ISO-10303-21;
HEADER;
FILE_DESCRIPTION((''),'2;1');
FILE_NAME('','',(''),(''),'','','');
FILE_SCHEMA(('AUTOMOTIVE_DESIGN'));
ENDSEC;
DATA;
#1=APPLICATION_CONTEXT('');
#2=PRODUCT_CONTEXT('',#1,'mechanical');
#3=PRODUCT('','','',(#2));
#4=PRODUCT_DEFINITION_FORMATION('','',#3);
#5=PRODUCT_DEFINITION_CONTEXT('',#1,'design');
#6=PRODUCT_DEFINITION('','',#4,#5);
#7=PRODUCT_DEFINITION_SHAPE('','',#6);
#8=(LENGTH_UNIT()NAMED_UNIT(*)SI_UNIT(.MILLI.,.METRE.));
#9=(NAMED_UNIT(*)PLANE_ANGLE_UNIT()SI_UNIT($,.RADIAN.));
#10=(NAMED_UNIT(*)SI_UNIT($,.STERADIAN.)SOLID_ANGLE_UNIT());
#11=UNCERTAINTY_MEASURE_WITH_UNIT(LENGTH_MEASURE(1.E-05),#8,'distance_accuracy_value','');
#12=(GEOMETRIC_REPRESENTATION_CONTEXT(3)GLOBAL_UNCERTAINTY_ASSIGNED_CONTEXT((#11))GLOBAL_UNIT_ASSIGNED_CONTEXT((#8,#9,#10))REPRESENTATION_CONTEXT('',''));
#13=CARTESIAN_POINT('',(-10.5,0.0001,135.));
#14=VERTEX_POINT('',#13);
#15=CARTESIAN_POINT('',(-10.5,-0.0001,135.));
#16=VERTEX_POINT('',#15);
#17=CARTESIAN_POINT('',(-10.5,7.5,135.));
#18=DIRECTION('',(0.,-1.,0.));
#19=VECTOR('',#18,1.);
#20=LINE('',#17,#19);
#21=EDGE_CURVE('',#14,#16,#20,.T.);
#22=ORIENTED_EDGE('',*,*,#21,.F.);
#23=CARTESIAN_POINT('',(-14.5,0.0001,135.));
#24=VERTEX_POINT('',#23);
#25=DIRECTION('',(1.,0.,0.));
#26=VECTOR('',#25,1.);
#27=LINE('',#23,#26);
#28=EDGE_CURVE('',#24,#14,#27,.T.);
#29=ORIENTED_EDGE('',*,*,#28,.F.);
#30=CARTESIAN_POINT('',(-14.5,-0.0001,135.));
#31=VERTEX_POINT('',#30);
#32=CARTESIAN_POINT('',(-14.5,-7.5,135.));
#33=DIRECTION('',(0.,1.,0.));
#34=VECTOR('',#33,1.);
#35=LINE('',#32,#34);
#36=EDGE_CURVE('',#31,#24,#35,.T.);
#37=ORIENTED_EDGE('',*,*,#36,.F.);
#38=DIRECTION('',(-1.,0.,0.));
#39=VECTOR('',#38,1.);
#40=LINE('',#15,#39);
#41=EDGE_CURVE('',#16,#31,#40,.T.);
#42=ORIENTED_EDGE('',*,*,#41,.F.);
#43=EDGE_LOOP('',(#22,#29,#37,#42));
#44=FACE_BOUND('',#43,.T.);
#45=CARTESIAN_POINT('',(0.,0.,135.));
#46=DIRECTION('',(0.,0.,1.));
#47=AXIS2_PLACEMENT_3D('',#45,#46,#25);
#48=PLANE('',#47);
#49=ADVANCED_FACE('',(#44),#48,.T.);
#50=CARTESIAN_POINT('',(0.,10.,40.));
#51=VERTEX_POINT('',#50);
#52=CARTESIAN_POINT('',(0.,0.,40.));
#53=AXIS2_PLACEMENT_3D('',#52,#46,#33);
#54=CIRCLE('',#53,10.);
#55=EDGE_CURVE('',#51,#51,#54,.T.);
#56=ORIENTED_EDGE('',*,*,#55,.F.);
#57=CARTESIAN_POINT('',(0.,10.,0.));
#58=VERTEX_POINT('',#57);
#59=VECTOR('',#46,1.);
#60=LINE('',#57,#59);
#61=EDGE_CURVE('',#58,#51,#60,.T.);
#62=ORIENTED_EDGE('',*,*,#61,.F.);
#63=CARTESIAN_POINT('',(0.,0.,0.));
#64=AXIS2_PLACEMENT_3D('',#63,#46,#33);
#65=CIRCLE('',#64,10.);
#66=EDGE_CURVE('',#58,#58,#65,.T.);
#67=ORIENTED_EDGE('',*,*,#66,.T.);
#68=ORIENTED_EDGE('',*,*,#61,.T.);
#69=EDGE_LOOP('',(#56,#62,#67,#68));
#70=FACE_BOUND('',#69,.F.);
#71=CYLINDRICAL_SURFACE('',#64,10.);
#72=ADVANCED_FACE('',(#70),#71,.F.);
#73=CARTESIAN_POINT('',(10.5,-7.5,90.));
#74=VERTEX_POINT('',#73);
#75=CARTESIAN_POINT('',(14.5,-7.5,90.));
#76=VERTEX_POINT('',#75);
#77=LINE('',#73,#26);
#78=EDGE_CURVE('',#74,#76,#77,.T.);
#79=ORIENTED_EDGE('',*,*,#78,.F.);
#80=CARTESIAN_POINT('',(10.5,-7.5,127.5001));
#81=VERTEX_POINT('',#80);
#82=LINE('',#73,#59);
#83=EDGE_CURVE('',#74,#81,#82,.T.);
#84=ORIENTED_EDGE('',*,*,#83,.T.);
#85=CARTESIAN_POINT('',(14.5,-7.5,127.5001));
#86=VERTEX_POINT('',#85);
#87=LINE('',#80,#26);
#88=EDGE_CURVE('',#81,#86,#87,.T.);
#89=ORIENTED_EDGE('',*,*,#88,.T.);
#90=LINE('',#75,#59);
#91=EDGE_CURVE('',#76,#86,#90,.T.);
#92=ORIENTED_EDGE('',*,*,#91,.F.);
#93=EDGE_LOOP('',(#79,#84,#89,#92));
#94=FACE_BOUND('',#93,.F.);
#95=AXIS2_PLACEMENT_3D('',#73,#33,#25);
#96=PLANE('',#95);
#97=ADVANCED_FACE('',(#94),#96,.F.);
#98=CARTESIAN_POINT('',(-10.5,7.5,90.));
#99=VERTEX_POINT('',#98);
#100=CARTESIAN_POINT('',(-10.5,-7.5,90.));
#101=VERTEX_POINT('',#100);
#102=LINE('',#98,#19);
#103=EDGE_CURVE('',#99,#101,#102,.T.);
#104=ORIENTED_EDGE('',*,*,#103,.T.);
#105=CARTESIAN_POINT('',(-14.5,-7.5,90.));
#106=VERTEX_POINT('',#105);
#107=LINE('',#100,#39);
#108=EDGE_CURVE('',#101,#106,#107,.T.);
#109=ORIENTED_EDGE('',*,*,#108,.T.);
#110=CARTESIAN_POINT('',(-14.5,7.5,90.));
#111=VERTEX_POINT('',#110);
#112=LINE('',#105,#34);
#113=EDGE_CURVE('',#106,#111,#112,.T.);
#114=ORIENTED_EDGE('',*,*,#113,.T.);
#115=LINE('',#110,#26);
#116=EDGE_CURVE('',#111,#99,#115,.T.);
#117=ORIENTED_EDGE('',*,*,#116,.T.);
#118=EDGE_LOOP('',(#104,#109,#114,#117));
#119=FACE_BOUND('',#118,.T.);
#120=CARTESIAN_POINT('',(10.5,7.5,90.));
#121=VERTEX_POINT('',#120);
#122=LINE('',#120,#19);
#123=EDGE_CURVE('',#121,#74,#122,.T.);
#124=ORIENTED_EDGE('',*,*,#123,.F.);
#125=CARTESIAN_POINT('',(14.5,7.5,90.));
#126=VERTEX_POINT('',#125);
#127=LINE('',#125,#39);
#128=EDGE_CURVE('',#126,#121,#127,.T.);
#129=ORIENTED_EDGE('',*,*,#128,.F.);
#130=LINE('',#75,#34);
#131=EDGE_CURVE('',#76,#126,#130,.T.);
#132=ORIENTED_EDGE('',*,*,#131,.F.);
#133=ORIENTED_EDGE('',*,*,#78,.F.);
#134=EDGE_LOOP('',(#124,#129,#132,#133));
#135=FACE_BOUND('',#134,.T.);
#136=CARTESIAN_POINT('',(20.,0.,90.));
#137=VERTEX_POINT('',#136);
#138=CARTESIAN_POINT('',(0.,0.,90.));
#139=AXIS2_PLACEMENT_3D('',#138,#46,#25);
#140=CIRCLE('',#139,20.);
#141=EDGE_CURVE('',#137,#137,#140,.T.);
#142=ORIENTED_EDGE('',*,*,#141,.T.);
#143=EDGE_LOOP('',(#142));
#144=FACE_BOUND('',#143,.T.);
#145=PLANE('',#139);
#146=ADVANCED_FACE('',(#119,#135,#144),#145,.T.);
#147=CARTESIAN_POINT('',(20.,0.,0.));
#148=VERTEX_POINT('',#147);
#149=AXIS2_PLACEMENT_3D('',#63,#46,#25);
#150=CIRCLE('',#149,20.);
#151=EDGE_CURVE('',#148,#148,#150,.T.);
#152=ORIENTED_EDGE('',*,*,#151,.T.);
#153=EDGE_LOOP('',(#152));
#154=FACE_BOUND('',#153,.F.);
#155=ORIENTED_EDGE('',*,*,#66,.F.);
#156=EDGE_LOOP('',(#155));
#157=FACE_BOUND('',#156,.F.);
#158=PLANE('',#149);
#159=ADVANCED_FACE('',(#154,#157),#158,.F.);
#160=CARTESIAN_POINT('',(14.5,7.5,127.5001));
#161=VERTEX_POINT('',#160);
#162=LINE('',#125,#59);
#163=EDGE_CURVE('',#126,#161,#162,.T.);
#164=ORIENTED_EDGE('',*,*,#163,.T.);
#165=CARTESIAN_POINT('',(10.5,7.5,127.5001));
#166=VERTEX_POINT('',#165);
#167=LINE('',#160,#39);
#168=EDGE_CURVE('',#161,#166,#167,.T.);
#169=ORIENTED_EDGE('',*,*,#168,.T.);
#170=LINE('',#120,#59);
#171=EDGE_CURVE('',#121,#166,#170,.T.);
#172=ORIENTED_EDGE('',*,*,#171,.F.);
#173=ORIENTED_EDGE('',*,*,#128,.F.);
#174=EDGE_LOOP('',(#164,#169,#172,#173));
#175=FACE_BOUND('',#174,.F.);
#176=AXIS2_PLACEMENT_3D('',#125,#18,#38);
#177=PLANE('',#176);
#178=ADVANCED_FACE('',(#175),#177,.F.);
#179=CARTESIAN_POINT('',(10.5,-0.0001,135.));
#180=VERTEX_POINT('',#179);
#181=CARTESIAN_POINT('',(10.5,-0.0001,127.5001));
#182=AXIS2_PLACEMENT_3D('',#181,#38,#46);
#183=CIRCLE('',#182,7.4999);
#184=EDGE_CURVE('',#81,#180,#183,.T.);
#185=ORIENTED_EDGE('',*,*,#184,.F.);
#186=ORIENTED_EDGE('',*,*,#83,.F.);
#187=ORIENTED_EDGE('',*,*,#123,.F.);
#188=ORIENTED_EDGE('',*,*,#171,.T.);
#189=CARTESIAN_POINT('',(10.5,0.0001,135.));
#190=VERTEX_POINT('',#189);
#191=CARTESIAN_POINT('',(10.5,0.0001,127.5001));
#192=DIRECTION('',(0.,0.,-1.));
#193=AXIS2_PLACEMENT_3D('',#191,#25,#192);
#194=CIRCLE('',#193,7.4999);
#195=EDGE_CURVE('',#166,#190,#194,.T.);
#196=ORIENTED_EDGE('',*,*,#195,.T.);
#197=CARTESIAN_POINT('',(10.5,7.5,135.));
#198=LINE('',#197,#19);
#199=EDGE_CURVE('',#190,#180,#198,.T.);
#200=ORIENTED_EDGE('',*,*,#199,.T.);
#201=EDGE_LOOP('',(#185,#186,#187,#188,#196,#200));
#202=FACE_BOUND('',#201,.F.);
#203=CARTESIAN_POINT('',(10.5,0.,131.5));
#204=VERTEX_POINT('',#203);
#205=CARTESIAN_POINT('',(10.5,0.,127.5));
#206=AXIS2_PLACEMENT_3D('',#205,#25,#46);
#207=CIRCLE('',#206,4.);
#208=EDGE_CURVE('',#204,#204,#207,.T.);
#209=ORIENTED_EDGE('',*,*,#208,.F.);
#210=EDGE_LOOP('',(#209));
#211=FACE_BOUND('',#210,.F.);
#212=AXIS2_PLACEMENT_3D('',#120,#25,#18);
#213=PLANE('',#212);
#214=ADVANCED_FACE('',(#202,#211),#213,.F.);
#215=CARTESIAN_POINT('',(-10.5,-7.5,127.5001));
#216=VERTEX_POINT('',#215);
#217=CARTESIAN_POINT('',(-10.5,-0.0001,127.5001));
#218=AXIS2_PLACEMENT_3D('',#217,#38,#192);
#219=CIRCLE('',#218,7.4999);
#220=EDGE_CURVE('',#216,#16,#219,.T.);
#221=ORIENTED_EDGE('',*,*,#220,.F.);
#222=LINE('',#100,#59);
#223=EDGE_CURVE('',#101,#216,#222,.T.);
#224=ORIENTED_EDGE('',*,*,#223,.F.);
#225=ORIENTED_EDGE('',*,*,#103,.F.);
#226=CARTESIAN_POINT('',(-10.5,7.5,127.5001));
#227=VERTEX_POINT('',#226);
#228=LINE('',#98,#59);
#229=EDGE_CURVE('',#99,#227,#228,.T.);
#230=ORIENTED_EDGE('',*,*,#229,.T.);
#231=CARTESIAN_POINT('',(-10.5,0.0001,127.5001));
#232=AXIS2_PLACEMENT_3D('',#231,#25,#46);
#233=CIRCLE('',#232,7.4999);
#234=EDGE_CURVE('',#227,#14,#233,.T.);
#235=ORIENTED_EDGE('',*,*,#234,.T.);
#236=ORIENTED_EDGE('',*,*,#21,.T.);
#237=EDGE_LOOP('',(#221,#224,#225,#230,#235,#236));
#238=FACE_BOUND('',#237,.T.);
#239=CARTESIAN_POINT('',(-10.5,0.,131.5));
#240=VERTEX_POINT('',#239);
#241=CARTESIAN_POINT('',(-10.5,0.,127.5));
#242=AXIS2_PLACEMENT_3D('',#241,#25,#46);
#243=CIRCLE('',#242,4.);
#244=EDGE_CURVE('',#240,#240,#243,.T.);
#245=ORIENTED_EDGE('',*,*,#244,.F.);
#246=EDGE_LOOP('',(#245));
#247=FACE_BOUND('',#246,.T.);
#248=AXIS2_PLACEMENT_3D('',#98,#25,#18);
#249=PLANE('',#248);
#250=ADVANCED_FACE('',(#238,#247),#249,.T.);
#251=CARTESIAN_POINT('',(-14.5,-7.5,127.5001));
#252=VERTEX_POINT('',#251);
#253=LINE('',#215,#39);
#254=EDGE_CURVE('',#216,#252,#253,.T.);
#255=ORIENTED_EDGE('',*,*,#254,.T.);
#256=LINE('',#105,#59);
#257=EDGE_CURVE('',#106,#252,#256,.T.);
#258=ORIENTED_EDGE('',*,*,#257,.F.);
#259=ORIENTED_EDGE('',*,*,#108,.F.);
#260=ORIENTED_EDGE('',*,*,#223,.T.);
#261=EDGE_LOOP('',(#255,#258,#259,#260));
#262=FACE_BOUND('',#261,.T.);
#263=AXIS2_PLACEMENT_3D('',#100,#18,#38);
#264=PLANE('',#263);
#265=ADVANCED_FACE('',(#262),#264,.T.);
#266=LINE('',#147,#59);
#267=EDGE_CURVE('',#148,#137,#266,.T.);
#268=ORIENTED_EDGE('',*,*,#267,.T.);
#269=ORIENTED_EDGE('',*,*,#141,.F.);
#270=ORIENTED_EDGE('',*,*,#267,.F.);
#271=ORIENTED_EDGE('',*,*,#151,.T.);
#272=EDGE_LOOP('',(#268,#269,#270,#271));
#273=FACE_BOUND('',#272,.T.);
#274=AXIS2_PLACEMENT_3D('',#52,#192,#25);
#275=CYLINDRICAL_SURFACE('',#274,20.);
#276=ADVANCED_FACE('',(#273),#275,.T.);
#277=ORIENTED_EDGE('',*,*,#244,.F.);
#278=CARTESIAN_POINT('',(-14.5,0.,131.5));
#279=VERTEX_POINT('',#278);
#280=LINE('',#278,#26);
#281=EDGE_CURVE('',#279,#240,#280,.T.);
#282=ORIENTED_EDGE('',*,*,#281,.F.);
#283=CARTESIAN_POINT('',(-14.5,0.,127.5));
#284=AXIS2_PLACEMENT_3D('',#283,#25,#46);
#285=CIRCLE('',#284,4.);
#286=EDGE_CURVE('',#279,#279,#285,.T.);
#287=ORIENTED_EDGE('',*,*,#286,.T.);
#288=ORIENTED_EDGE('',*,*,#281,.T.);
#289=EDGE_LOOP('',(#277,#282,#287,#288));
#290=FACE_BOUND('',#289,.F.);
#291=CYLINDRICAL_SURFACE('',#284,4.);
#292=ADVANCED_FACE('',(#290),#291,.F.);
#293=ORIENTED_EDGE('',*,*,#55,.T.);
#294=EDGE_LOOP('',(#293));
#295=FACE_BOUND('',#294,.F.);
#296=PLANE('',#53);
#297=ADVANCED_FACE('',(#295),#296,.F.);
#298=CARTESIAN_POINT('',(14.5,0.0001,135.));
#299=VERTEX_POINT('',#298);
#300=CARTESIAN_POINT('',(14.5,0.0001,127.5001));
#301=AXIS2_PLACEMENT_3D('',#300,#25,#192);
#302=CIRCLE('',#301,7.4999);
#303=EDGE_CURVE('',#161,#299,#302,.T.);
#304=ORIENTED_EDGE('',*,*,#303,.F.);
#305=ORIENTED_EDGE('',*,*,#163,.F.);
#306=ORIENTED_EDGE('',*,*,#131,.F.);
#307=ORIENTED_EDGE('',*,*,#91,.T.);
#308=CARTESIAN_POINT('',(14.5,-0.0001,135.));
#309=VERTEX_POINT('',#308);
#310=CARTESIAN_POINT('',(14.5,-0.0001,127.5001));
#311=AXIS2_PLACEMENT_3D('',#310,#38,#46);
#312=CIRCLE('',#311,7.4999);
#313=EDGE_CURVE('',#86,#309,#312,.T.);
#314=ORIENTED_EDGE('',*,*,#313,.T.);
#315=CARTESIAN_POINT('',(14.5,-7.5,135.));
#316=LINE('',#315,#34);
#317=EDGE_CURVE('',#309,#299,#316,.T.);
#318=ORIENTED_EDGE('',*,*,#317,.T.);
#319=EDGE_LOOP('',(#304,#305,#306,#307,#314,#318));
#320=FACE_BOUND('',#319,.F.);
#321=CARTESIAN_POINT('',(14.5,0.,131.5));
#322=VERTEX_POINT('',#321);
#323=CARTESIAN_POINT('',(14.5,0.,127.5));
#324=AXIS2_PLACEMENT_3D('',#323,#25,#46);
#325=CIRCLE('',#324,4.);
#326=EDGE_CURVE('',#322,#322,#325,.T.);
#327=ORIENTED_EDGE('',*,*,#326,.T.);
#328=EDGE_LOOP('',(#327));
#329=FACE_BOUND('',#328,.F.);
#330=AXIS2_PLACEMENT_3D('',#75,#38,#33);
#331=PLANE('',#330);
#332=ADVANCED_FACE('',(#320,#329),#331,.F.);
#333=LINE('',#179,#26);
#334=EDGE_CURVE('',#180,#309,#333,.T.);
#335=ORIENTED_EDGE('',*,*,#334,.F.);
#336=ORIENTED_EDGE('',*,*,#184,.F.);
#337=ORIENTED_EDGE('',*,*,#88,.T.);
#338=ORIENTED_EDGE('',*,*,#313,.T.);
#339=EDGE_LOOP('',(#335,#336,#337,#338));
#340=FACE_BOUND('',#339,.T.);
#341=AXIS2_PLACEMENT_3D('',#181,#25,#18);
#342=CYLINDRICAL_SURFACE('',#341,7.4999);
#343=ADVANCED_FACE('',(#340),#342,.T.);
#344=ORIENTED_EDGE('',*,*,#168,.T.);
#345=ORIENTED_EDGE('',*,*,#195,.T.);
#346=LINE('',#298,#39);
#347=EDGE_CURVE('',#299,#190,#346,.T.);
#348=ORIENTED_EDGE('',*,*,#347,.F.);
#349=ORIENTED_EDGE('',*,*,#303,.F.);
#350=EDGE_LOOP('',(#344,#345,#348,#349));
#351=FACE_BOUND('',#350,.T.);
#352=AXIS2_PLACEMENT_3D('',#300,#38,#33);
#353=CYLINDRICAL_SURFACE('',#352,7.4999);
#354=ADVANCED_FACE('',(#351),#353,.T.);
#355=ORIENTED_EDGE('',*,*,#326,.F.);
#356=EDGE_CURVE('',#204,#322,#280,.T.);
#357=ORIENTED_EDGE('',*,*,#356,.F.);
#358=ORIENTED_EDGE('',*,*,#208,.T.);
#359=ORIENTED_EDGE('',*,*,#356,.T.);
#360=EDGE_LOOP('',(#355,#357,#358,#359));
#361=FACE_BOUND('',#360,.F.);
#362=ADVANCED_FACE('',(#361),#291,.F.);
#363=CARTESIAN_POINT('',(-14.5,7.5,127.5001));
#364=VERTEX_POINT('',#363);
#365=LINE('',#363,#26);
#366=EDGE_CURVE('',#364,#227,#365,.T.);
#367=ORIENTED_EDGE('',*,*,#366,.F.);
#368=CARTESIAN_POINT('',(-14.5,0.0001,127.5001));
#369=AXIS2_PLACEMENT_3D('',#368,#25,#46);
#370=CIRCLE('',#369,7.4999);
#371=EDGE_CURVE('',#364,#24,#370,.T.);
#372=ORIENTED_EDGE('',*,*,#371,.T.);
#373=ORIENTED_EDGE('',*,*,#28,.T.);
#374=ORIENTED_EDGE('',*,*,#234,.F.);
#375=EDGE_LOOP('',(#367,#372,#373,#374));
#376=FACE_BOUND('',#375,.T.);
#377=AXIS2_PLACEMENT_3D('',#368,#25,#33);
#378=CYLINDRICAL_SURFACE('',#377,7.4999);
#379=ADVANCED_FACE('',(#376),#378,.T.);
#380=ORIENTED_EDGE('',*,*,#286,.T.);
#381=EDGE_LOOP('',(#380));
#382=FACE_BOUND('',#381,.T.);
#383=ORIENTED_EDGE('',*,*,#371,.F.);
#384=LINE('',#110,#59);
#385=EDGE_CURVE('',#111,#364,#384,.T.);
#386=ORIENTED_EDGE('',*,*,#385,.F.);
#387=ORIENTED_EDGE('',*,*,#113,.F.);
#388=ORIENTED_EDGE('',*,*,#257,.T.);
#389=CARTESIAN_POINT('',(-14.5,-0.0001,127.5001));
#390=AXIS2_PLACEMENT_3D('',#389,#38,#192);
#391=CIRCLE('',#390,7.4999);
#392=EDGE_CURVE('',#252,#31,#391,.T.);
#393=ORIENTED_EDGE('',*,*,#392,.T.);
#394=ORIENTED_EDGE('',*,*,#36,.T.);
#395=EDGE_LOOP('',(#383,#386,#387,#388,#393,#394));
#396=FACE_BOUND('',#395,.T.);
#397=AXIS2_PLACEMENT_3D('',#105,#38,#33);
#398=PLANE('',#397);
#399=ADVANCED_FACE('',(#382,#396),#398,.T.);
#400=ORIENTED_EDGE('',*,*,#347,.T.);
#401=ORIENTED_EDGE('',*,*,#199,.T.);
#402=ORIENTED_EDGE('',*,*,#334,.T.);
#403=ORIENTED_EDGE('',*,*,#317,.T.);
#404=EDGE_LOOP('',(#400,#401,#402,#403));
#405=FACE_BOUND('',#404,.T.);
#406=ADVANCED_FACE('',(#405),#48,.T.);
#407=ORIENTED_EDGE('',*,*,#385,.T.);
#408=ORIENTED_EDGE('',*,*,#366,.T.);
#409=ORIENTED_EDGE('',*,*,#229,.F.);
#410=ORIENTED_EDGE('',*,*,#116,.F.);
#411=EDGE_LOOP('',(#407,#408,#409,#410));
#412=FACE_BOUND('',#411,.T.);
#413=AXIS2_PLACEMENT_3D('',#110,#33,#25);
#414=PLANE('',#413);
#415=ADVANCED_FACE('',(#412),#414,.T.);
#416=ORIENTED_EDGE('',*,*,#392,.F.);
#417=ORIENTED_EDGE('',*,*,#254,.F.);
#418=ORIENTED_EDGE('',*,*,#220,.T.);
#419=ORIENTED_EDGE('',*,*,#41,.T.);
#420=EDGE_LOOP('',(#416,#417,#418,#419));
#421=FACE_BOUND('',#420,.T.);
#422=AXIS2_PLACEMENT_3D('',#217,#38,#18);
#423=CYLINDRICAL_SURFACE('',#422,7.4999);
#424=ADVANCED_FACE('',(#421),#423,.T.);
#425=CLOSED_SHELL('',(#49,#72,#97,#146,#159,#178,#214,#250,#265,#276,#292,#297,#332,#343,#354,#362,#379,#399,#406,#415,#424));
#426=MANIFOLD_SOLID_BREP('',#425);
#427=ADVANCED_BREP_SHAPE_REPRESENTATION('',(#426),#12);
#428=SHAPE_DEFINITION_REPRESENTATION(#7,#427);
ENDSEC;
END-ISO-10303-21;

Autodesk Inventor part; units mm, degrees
ref_plane "YZ Plane" through (0, 0, 0) normal (1, 0, 0) x (0, 1, 0)
ref_plane "XZ Plane" through (0, 0, 0) normal (0, 1, 0) x (-1, 0, 0)
ref_plane "XY Plane" through (0, 0, 0) normal (0, 0, 1) x (1, 0, 0)
sketch "草图1" plane through (0, 0, 0) normal (0, 0, 1) x (1, 0, 0)
  circle A0 centre (0, 0) radius 20 projected
  circle A1 centre (0, 0) radius 10 projected
  point P0 (0, 0)
extrude "拉伸1" add sketch "草图1" along normal blind 40 contours A0 | A1
sketch "草图2" plane through (0, 0, 40) normal (0, 0, 1) x (1, 0, 0)
  circle A0 centre (0, 0) radius 20 projected
  point P0 (0, 0)
extrude "拉伸2" add sketch "草图2" along normal blind 50
sketch "草图3" plane through (0, 0, 90) normal (0, 0, 1) x (1, 0, 0)
  line L0 (0, 0) -> (0, 22.0262)
  line L1 (-10.5, -7.5) -> (-14.5, -7.5)
  line L2 (-14.5, -7.5) -> (-14.5, 7.5)
  line L3 (-14.5, 7.5) -> (-10.5, 7.5)
  line L4 (-10.5, 7.5) -> (-10.5, -7.5)
  line L5 (-10.5, -7.5) -> (-14.5, 7.5) construction
  line L6 (-14.5, -7.5) -> (-10.5, 7.5) construction
  line L7 (10.5, -7.5) -> (14.5, -7.5)
  line L8 (14.5, -7.5) -> (14.5, 7.5)
  line L9 (14.5, 7.5) -> (10.5, 7.5)
  line L10 (10.5, 7.5) -> (10.5, -7.5)
  line L11 (10.5, -7.5) -> (14.5, 7.5) construction
  line L12 (14.5, -7.5) -> (10.5, 7.5) construction
  point P0 (-12.5, 0)
  point P1 (12.5, 0)
  point P2 (-12.5, 0)
  dimension "d4" = 25
  dimension "d5" = 4
  dimension "d6" = 15
extrude "拉伸3" add sketch "草图3" along normal blind 45
full round fillet "全圆角1" first side at (-13.1667, -7.5, 105) centre faces at (-11.8333, -2.5, 135) second side at (-11.8333, 7.5, 105)
full round fillet "全圆角2" first side at (13.1667, 7.5, 105) centre faces at (13.1667, -2.5, 135) second side at (11.8333, -7.5, 105)
sketch "草图4" plane through (-14.5, -7.5, 90) normal (-1, 0, 0) x (0, 0, 1)
  arc A0 (37.5, 0) -> (37.5, 15) centre (37.5, 7.5) ccw projected
  point P0 (-90, 7.5)
hole "孔1" at (-14.5, 0, 127.5) direction (1, 0, 0) diameter 8 end through all
sketch "草图5" plane through (0, 0, 0) normal (0, 0, -1) x (-1, 0, 0)
  circle A0 centre (0, 0) radius 20 projected
  point P0 (0, 0)
hole "孔2" at (0, 0, 0) direction (0, 0, 1) diameter 20 depth 40
properties part number "节块"
